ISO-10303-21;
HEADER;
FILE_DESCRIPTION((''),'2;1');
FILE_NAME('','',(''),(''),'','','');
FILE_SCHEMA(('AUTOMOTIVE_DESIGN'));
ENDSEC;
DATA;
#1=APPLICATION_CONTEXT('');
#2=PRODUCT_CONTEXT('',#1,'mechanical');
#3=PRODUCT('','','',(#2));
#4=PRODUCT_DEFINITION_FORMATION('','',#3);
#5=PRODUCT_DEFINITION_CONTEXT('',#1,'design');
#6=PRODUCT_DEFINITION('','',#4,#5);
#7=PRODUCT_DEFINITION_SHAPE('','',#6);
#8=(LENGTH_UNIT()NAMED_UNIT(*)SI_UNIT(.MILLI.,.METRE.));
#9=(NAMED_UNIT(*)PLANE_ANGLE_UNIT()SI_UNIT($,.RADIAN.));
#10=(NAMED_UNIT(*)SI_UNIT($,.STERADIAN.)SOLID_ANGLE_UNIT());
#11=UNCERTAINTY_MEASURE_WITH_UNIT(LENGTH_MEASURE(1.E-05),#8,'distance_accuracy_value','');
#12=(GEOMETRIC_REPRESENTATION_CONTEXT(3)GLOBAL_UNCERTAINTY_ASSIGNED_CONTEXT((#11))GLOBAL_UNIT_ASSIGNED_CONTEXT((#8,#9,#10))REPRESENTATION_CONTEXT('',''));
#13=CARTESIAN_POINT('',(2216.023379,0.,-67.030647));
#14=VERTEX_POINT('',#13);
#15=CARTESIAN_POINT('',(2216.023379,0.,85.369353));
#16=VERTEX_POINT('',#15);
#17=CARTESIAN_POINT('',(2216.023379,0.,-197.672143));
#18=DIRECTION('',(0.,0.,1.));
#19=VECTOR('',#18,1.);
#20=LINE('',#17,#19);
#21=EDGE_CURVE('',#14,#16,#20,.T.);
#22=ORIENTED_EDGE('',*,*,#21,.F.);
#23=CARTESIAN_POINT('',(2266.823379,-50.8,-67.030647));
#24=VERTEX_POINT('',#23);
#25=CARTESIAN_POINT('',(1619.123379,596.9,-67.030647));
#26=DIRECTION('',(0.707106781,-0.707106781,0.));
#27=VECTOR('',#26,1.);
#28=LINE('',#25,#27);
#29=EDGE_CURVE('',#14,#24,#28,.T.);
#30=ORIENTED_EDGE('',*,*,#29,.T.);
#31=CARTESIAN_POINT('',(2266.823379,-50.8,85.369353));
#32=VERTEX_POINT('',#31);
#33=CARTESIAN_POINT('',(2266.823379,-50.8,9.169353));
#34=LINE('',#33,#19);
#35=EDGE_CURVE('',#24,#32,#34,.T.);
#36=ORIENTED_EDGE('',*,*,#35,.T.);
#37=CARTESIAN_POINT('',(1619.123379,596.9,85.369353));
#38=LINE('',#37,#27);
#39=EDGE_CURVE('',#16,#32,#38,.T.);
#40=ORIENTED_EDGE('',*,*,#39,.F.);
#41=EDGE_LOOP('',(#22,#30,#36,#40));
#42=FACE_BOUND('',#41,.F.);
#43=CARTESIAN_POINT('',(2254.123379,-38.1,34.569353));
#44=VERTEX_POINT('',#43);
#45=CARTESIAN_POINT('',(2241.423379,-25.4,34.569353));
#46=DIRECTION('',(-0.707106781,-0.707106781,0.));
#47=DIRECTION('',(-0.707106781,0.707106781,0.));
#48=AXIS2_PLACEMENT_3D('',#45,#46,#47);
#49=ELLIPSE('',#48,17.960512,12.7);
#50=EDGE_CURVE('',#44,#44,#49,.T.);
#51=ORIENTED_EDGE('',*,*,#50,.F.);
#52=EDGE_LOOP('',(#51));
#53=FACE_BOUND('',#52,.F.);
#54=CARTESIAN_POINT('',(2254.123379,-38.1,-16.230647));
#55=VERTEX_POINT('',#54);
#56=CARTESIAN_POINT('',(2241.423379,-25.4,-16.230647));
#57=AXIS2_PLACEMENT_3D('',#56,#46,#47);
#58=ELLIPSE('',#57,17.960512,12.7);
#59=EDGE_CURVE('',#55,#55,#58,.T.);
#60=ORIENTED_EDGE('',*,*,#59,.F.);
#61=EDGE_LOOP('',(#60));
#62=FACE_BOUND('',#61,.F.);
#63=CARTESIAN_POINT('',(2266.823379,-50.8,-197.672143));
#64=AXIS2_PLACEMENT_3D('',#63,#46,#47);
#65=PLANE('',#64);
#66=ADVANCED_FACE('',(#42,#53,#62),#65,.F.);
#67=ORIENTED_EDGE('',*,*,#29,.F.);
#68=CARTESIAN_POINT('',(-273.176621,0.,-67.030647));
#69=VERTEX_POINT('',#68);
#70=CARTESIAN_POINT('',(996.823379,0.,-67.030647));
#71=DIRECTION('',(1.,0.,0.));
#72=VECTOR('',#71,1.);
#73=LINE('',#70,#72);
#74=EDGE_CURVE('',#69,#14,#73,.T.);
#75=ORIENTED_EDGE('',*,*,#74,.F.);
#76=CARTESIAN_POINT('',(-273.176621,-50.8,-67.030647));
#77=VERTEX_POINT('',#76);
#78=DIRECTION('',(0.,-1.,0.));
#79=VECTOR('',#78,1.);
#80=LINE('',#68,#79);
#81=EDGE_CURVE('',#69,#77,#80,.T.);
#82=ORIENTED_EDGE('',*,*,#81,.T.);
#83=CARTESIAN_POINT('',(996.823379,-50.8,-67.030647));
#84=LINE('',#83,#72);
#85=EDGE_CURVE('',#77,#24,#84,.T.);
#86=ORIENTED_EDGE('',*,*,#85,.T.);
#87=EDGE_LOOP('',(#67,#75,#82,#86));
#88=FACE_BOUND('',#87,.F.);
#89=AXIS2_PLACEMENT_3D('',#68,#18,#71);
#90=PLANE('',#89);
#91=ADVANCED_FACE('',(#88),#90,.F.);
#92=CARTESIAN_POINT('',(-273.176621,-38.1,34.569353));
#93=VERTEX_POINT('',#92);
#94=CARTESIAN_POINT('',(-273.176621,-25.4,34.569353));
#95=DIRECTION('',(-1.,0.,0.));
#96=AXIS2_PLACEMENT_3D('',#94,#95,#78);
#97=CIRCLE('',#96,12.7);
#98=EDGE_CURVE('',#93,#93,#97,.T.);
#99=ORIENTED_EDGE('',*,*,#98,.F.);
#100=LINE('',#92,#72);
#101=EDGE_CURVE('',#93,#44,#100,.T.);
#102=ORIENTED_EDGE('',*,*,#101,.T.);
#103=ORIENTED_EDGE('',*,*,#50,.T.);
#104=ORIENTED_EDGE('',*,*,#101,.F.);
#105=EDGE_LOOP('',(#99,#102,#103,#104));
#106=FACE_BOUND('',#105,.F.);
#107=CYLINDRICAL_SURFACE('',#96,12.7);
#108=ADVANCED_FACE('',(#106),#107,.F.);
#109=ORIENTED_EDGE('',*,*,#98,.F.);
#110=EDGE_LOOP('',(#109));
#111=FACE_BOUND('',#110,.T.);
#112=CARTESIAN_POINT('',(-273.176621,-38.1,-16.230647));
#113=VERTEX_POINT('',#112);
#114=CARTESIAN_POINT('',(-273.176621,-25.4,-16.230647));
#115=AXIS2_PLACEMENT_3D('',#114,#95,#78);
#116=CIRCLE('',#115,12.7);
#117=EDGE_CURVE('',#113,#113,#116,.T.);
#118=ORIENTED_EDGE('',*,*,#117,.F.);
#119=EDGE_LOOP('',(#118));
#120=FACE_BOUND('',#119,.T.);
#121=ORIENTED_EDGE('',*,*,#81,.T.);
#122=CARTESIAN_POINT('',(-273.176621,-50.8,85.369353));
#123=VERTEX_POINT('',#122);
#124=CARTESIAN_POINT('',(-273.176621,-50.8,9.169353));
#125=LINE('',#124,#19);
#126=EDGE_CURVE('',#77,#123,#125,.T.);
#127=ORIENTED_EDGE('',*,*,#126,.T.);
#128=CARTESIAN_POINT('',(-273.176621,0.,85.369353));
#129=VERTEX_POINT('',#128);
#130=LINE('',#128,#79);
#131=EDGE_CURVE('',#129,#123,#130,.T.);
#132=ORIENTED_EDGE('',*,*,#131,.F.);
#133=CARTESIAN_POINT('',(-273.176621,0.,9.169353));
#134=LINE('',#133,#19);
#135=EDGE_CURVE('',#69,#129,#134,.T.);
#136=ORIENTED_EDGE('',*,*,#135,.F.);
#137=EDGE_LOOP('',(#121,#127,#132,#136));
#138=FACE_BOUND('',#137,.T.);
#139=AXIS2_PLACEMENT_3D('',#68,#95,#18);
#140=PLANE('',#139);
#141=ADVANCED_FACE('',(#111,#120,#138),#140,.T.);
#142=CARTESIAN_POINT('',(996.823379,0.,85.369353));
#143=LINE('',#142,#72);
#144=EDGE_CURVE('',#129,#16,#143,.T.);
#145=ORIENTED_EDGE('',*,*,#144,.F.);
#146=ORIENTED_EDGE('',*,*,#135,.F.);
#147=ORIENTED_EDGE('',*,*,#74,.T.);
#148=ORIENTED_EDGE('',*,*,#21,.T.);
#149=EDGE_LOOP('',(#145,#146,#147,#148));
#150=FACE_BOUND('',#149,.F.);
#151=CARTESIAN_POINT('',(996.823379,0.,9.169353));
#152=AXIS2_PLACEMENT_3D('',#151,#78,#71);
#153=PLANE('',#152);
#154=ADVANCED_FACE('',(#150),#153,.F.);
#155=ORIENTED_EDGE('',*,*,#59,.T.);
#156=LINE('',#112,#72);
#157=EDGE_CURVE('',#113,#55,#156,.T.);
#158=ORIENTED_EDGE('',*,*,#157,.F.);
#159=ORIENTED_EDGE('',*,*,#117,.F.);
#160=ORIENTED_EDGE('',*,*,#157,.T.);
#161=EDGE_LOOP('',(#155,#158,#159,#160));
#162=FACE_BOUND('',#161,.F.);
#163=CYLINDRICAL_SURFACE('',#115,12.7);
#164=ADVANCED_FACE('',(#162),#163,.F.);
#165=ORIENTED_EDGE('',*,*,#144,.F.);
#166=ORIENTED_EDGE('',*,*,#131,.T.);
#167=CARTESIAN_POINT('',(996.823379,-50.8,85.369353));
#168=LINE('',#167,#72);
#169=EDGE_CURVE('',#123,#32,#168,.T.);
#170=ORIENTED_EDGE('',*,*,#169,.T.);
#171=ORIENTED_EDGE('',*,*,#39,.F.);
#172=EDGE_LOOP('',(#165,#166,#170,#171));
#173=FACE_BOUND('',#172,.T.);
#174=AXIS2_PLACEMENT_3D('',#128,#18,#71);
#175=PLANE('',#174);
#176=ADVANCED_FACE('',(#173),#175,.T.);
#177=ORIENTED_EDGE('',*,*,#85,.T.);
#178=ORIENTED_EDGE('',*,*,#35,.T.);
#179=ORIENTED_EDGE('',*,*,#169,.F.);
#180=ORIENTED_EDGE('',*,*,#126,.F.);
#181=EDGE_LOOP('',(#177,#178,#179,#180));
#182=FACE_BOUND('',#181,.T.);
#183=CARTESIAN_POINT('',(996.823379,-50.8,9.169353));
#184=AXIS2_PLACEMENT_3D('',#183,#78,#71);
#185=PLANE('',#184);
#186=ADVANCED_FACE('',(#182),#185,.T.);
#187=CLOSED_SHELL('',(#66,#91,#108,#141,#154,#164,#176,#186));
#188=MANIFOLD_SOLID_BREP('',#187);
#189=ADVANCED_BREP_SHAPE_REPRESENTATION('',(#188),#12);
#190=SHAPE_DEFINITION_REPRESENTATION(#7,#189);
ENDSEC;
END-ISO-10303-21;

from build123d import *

# Parameters (mm, degrees)
F0_W        = 2540
F0_H        = 152.4
F1_DEPTH    = 50.8
F2_R        = 12.7
F3_DEPTH    = 2540
F4_T1_DEPTH = 413.6829915773


# Not quite as in the source:
# - a fillet or chamfer that OpenCascade refuses, or shapes differently, is made with other operations: its cross-section is extruded or revolved along the edge and cut away or added


with BuildPart() as f1:
    # F0 (on Front) → F1 (new body)
    with BuildSketch(Plane.XZ):
        with Locations((996.8233792729, 9.1693531722)):
            Rectangle(F0_W, F0_H)
    extrude(amount=F1_DEPTH)

    # F2 (on face) → F3 (cut)
    with BuildSketch(Plane(origin=(-273.1766207271, 0, 0), x_dir=(0, -1, 0), z_dir=(-1, 0, 0))):
        with Locations((25.4, 34.5693531722)):
            Circle(F2_R)
        with Locations((25.4, -16.2306468278)):
            Circle(F2_R)
    extrude(amount=-F3_DEPTH, mode=Mode.SUBTRACT)

    # F4: chamfer of 50.8 on 1 edges, made by hand

    # F4_s2 → F4_t1 (cut)
    with BuildSketch(Plane.XY.offset(-197.6721426165)):
        Polygon((2266.8233792729, -50.8), (2216.0233792729, 0), (2266.8233792729, 0), align=None)
    extrude(amount=F4_T1_DEPTH, mode=Mode.SUBTRACT)


solid = f1.part
